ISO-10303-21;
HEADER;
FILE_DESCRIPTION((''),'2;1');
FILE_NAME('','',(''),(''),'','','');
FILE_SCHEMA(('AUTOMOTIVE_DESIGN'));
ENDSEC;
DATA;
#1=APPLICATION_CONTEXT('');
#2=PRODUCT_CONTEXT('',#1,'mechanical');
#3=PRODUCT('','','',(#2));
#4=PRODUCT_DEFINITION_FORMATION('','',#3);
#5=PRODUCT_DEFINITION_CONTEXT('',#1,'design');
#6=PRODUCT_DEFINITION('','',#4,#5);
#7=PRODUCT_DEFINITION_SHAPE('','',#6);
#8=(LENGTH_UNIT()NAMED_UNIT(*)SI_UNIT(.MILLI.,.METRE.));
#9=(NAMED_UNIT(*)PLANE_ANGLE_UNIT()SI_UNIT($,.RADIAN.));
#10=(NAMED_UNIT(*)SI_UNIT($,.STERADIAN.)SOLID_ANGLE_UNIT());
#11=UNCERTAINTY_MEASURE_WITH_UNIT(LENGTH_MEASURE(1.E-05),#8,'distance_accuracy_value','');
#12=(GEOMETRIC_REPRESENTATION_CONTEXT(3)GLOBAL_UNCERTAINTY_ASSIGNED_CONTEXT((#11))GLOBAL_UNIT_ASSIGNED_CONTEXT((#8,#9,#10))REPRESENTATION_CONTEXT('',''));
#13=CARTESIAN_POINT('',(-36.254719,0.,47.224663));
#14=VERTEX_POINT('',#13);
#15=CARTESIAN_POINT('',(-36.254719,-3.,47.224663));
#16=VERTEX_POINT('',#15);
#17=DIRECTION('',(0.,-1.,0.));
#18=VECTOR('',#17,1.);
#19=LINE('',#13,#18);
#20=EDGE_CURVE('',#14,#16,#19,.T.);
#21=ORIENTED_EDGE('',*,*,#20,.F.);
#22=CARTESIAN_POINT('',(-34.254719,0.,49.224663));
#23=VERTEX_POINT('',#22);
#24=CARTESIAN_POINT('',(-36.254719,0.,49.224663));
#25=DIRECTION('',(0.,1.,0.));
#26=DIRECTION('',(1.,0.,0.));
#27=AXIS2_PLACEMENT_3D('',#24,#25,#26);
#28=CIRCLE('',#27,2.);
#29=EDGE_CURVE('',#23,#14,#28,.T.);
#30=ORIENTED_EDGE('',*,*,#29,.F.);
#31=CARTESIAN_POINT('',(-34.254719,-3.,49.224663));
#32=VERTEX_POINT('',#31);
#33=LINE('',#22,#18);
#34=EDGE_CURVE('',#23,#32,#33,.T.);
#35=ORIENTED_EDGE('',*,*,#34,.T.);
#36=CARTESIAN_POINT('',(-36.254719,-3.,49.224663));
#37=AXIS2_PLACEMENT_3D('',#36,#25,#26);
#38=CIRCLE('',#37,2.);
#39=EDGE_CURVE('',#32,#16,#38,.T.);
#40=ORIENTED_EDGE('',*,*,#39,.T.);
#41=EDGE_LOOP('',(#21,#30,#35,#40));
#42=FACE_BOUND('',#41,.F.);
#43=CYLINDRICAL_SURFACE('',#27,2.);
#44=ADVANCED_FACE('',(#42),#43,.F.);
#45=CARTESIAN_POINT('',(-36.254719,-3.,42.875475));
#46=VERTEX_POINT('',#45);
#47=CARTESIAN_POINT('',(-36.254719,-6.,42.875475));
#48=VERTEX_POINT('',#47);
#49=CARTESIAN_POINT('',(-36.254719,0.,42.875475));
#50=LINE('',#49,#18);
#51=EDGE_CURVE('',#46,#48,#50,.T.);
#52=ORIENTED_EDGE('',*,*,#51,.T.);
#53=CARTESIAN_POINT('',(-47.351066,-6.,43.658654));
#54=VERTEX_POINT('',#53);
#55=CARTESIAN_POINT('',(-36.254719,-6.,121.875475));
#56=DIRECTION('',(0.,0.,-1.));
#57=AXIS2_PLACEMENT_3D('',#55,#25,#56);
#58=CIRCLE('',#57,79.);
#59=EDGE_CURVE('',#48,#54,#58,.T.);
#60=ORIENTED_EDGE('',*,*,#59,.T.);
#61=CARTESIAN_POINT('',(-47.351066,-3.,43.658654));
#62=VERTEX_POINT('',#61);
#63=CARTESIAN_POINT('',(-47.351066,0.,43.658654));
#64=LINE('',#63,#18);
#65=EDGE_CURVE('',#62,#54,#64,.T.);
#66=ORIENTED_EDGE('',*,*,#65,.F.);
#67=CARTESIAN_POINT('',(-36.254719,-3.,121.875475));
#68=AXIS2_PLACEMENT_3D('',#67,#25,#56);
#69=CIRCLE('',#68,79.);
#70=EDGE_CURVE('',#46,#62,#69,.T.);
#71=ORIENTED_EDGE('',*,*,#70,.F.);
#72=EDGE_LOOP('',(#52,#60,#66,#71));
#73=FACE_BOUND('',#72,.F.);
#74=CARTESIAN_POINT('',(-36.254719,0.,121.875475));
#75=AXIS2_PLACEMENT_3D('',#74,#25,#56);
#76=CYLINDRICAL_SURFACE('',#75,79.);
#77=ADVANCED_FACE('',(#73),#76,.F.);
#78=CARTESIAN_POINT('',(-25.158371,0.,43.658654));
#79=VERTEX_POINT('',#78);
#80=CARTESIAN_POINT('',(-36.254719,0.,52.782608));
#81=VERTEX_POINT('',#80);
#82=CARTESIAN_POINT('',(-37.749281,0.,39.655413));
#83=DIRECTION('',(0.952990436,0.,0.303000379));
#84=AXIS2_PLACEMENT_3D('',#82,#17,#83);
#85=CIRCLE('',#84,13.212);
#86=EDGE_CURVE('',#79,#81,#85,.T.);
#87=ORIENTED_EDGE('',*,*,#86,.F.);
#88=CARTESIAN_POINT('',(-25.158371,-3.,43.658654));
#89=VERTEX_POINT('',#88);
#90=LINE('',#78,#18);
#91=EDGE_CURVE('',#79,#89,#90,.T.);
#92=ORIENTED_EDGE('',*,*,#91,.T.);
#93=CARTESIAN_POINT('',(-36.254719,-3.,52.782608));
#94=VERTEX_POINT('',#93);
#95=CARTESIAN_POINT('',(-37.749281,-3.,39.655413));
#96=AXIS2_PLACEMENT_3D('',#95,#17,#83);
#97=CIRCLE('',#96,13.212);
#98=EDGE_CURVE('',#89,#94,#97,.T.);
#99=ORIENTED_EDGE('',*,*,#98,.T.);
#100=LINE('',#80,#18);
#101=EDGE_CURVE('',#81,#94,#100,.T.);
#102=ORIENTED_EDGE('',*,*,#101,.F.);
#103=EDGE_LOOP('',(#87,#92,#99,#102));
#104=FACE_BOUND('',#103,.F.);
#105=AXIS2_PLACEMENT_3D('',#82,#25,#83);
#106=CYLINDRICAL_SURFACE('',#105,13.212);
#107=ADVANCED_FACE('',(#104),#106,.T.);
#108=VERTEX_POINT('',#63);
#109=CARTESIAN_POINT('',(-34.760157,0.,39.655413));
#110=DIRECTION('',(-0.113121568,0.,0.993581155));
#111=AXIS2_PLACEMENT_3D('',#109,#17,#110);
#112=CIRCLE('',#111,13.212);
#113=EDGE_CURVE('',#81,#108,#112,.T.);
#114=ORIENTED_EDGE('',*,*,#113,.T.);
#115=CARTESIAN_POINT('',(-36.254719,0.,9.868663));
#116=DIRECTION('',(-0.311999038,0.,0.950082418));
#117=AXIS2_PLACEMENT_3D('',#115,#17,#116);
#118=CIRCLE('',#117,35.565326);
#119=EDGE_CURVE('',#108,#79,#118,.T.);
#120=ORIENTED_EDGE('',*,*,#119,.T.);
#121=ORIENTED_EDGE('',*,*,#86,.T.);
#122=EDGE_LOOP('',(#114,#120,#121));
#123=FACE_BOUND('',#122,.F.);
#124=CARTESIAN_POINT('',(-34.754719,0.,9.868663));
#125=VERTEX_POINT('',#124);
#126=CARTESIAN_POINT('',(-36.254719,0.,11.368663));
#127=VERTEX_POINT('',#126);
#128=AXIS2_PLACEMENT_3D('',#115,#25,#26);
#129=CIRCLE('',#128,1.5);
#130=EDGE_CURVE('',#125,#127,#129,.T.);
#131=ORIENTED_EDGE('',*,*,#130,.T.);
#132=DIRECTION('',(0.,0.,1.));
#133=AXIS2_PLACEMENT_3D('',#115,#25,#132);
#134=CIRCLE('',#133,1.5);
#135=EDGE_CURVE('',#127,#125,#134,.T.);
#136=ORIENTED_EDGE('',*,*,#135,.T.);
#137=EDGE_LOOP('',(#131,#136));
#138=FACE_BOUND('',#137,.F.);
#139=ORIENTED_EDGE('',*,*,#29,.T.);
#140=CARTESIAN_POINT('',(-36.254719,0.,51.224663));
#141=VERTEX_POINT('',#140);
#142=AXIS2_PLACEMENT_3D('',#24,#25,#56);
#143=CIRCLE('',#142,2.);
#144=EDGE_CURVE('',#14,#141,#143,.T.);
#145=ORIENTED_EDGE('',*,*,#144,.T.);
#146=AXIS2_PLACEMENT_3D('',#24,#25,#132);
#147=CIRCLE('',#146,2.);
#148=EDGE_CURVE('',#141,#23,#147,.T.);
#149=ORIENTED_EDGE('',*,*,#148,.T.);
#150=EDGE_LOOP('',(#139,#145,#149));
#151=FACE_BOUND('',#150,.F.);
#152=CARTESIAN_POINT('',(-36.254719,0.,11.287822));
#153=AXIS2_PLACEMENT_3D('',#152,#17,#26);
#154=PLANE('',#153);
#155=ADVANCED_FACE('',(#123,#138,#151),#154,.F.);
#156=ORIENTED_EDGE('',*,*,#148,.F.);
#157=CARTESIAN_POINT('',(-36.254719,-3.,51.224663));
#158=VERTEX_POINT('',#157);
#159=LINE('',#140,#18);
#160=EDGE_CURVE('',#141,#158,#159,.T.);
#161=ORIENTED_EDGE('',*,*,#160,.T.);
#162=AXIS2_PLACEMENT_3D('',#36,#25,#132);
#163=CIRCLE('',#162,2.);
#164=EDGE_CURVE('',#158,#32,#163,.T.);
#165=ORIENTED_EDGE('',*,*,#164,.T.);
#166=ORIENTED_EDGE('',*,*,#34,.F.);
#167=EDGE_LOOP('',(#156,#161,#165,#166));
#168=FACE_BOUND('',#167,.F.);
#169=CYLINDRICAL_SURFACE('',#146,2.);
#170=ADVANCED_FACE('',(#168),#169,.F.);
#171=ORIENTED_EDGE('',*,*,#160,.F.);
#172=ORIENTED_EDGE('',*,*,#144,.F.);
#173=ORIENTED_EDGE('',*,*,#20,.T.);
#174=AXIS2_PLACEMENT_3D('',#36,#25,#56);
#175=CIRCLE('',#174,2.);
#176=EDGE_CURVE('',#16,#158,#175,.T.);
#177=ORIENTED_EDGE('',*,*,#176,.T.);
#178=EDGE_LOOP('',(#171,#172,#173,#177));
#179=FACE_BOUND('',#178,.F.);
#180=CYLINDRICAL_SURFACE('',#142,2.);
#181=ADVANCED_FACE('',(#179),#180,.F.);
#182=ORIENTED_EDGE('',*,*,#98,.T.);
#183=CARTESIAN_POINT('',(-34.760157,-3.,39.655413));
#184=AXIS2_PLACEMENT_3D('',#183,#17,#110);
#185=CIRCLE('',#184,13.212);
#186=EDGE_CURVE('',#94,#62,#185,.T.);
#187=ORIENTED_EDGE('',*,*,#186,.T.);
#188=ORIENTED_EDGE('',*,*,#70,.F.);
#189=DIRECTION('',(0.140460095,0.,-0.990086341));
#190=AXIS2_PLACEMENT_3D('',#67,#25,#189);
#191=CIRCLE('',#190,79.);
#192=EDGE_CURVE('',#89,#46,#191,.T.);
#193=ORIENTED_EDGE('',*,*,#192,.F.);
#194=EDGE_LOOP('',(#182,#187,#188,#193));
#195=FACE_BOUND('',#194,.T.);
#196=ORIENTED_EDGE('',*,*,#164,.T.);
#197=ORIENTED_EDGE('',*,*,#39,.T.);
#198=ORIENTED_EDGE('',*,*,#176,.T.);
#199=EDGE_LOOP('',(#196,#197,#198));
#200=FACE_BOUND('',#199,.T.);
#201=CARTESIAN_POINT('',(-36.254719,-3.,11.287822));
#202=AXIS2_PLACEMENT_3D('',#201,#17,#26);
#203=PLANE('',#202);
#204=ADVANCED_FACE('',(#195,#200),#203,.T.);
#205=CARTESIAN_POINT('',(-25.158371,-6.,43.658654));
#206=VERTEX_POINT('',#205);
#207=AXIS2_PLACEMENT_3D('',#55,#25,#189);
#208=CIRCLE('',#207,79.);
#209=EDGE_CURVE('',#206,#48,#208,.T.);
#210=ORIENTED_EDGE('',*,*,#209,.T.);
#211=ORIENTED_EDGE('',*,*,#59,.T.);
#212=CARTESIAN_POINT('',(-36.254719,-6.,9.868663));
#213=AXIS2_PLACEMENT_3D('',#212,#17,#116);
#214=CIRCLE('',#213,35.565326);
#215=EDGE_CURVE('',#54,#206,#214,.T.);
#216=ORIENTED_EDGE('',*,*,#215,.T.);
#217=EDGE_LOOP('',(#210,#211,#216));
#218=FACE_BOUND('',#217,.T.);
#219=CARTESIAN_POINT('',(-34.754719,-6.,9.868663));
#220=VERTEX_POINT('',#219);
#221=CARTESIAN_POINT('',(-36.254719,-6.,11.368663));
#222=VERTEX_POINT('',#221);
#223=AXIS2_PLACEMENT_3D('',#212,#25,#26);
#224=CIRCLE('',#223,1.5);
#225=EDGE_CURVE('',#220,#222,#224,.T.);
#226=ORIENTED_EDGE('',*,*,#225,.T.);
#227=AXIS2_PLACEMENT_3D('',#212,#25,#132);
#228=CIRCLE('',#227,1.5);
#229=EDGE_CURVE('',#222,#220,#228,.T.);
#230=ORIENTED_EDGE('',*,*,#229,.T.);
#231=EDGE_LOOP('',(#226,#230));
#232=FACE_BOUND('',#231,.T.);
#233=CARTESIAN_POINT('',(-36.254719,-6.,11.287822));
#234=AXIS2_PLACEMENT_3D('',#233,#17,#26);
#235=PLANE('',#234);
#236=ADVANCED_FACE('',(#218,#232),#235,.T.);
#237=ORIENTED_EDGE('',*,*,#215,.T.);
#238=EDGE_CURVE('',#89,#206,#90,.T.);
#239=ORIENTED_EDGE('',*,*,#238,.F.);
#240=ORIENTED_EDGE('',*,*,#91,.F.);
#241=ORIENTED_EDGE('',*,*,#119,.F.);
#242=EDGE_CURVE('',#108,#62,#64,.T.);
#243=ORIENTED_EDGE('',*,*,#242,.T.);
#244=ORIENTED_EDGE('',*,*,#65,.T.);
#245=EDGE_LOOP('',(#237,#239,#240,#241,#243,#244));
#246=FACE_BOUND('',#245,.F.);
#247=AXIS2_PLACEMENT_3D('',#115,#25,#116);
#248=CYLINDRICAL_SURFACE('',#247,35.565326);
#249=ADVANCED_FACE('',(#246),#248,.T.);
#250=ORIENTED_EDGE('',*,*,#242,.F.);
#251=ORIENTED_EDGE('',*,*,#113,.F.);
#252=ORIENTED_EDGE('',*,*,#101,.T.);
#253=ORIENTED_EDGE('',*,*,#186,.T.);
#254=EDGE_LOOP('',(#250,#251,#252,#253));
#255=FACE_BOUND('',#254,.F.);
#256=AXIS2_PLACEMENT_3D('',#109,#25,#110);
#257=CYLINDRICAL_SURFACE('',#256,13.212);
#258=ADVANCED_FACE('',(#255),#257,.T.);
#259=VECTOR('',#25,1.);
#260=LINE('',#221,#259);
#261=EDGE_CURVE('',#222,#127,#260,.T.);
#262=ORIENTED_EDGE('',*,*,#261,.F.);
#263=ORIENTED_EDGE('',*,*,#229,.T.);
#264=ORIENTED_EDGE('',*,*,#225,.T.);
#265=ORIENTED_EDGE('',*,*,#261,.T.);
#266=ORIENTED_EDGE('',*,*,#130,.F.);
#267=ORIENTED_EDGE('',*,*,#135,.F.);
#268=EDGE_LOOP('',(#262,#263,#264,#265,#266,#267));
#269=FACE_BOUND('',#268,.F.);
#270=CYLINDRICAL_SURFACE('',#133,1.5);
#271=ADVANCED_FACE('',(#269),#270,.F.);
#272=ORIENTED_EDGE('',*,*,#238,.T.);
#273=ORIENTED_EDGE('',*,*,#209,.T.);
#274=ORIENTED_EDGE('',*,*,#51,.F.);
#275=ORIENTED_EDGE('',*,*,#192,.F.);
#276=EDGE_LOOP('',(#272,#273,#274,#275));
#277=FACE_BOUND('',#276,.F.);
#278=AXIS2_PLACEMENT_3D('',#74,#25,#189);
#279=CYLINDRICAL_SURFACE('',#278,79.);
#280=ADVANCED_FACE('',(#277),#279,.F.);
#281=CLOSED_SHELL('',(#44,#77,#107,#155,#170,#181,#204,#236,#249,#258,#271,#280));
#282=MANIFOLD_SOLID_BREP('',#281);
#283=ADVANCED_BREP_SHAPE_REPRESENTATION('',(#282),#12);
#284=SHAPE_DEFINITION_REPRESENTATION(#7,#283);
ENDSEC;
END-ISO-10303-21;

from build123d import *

# Parameters (mm, degrees)
F1_DEPTH = 3
F2_DEPTH = 6


# Not quite as in the source:
# - the program builds the solid bodies; features that only make, move or delete a surface that nothing else refers to are left out


with BuildPart() as f1:
    # F0 (on Front) → F1 (new body)
    with BuildSketch(Plane.XZ):
        with BuildLine():
            ThreePointArc((-36.2547188994, 42.8754752639), (-41.8166946482, 43.071513271), (-47.3510663807, 43.6586543583))
            ThreePointArc((-47.3510663807, 43.6586543583), (-36.2547188994, -25.6966625147), (-25.1583714182, 43.6586543583))
            ThreePointArc((-25.1583714182, 43.6586543583), (-30.6927431507, 43.071513271), (-36.2547188994, 42.8754752639))
        make_face()
        with BuildLine():
            ThreePointArc((-34.7547188994, 9.8686634646), (-37.3153790712, 8.8080032929), (-36.2547188994, 11.3686634646))
            ThreePointArc((-36.2547188994, 11.3686634646), (-35.1940587277, 10.9293236364), (-34.7547188994, 9.8686634646))
        make_face(mode=Mode.SUBTRACT)
        with BuildLine():
            ThreePointArc((-36.2547188994, 52.7826075633), (-43.1513282612, 49.8605681538), (-47.3510663807, 43.6586543583))
            ThreePointArc((-47.3510663807, 43.6586543583), (-41.8166946482, 43.071513271), (-36.2547188994, 42.8754752639))
            Line((-36.2547188994, 42.8754752639), (-36.2547188994, 47.2246634646))
            ThreePointArc((-36.2547188994, 47.2246634646), (-38.2547188994, 49.2246634646), (-36.2547188994, 51.2246634646))
            Line((-36.2547188994, 51.2246634646), (-36.2547188994, 52.7826075633))
        make_face()
        with BuildLine():
            ThreePointArc((-36.2547188994, 42.8754752639), (-30.6927431507, 43.071513271), (-25.1583714182, 43.6586543583))
            ThreePointArc((-25.1583714182, 43.6586543583), (-29.3581095377, 49.8605681538), (-36.2547188994, 52.7826075633))
            Line((-36.2547188994, 52.7826075633), (-36.2547188994, 51.2246634646))
            ThreePointArc((-36.2547188994, 51.2246634646), (-34.8405053371, 50.638877027), (-34.2547188994, 49.2246634646))
            ThreePointArc((-34.2547188994, 49.2246634646), (-34.8405053371, 47.8104499023), (-36.2547188994, 47.2246634646))
            Line((-36.2547188994, 47.2246634646), (-36.2547188994, 42.8754752639))
        make_face()
    extrude(amount=F1_DEPTH)

    # F0 (on Front) → F2 (join)
    with BuildSketch(Plane.XZ):
        with BuildLine():
            ThreePointArc((-36.2547188994, 42.8754752639), (-41.8166946482, 43.071513271), (-47.3510663807, 43.6586543583))
            ThreePointArc((-47.3510663807, 43.6586543583), (-36.2547188994, -25.6966625147), (-25.1583714182, 43.6586543583))
            ThreePointArc((-25.1583714182, 43.6586543583), (-30.6927431507, 43.071513271), (-36.2547188994, 42.8754752639))
        make_face()
        with BuildLine():
            ThreePointArc((-34.7547188994, 9.8686634646), (-37.3153790712, 8.8080032929), (-36.2547188994, 11.3686634646))
            ThreePointArc((-36.2547188994, 11.3686634646), (-35.1940587277, 10.9293236364), (-34.7547188994, 9.8686634646))
        make_face(mode=Mode.SUBTRACT)
    extrude(amount=F2_DEPTH)


solid = f1.part
